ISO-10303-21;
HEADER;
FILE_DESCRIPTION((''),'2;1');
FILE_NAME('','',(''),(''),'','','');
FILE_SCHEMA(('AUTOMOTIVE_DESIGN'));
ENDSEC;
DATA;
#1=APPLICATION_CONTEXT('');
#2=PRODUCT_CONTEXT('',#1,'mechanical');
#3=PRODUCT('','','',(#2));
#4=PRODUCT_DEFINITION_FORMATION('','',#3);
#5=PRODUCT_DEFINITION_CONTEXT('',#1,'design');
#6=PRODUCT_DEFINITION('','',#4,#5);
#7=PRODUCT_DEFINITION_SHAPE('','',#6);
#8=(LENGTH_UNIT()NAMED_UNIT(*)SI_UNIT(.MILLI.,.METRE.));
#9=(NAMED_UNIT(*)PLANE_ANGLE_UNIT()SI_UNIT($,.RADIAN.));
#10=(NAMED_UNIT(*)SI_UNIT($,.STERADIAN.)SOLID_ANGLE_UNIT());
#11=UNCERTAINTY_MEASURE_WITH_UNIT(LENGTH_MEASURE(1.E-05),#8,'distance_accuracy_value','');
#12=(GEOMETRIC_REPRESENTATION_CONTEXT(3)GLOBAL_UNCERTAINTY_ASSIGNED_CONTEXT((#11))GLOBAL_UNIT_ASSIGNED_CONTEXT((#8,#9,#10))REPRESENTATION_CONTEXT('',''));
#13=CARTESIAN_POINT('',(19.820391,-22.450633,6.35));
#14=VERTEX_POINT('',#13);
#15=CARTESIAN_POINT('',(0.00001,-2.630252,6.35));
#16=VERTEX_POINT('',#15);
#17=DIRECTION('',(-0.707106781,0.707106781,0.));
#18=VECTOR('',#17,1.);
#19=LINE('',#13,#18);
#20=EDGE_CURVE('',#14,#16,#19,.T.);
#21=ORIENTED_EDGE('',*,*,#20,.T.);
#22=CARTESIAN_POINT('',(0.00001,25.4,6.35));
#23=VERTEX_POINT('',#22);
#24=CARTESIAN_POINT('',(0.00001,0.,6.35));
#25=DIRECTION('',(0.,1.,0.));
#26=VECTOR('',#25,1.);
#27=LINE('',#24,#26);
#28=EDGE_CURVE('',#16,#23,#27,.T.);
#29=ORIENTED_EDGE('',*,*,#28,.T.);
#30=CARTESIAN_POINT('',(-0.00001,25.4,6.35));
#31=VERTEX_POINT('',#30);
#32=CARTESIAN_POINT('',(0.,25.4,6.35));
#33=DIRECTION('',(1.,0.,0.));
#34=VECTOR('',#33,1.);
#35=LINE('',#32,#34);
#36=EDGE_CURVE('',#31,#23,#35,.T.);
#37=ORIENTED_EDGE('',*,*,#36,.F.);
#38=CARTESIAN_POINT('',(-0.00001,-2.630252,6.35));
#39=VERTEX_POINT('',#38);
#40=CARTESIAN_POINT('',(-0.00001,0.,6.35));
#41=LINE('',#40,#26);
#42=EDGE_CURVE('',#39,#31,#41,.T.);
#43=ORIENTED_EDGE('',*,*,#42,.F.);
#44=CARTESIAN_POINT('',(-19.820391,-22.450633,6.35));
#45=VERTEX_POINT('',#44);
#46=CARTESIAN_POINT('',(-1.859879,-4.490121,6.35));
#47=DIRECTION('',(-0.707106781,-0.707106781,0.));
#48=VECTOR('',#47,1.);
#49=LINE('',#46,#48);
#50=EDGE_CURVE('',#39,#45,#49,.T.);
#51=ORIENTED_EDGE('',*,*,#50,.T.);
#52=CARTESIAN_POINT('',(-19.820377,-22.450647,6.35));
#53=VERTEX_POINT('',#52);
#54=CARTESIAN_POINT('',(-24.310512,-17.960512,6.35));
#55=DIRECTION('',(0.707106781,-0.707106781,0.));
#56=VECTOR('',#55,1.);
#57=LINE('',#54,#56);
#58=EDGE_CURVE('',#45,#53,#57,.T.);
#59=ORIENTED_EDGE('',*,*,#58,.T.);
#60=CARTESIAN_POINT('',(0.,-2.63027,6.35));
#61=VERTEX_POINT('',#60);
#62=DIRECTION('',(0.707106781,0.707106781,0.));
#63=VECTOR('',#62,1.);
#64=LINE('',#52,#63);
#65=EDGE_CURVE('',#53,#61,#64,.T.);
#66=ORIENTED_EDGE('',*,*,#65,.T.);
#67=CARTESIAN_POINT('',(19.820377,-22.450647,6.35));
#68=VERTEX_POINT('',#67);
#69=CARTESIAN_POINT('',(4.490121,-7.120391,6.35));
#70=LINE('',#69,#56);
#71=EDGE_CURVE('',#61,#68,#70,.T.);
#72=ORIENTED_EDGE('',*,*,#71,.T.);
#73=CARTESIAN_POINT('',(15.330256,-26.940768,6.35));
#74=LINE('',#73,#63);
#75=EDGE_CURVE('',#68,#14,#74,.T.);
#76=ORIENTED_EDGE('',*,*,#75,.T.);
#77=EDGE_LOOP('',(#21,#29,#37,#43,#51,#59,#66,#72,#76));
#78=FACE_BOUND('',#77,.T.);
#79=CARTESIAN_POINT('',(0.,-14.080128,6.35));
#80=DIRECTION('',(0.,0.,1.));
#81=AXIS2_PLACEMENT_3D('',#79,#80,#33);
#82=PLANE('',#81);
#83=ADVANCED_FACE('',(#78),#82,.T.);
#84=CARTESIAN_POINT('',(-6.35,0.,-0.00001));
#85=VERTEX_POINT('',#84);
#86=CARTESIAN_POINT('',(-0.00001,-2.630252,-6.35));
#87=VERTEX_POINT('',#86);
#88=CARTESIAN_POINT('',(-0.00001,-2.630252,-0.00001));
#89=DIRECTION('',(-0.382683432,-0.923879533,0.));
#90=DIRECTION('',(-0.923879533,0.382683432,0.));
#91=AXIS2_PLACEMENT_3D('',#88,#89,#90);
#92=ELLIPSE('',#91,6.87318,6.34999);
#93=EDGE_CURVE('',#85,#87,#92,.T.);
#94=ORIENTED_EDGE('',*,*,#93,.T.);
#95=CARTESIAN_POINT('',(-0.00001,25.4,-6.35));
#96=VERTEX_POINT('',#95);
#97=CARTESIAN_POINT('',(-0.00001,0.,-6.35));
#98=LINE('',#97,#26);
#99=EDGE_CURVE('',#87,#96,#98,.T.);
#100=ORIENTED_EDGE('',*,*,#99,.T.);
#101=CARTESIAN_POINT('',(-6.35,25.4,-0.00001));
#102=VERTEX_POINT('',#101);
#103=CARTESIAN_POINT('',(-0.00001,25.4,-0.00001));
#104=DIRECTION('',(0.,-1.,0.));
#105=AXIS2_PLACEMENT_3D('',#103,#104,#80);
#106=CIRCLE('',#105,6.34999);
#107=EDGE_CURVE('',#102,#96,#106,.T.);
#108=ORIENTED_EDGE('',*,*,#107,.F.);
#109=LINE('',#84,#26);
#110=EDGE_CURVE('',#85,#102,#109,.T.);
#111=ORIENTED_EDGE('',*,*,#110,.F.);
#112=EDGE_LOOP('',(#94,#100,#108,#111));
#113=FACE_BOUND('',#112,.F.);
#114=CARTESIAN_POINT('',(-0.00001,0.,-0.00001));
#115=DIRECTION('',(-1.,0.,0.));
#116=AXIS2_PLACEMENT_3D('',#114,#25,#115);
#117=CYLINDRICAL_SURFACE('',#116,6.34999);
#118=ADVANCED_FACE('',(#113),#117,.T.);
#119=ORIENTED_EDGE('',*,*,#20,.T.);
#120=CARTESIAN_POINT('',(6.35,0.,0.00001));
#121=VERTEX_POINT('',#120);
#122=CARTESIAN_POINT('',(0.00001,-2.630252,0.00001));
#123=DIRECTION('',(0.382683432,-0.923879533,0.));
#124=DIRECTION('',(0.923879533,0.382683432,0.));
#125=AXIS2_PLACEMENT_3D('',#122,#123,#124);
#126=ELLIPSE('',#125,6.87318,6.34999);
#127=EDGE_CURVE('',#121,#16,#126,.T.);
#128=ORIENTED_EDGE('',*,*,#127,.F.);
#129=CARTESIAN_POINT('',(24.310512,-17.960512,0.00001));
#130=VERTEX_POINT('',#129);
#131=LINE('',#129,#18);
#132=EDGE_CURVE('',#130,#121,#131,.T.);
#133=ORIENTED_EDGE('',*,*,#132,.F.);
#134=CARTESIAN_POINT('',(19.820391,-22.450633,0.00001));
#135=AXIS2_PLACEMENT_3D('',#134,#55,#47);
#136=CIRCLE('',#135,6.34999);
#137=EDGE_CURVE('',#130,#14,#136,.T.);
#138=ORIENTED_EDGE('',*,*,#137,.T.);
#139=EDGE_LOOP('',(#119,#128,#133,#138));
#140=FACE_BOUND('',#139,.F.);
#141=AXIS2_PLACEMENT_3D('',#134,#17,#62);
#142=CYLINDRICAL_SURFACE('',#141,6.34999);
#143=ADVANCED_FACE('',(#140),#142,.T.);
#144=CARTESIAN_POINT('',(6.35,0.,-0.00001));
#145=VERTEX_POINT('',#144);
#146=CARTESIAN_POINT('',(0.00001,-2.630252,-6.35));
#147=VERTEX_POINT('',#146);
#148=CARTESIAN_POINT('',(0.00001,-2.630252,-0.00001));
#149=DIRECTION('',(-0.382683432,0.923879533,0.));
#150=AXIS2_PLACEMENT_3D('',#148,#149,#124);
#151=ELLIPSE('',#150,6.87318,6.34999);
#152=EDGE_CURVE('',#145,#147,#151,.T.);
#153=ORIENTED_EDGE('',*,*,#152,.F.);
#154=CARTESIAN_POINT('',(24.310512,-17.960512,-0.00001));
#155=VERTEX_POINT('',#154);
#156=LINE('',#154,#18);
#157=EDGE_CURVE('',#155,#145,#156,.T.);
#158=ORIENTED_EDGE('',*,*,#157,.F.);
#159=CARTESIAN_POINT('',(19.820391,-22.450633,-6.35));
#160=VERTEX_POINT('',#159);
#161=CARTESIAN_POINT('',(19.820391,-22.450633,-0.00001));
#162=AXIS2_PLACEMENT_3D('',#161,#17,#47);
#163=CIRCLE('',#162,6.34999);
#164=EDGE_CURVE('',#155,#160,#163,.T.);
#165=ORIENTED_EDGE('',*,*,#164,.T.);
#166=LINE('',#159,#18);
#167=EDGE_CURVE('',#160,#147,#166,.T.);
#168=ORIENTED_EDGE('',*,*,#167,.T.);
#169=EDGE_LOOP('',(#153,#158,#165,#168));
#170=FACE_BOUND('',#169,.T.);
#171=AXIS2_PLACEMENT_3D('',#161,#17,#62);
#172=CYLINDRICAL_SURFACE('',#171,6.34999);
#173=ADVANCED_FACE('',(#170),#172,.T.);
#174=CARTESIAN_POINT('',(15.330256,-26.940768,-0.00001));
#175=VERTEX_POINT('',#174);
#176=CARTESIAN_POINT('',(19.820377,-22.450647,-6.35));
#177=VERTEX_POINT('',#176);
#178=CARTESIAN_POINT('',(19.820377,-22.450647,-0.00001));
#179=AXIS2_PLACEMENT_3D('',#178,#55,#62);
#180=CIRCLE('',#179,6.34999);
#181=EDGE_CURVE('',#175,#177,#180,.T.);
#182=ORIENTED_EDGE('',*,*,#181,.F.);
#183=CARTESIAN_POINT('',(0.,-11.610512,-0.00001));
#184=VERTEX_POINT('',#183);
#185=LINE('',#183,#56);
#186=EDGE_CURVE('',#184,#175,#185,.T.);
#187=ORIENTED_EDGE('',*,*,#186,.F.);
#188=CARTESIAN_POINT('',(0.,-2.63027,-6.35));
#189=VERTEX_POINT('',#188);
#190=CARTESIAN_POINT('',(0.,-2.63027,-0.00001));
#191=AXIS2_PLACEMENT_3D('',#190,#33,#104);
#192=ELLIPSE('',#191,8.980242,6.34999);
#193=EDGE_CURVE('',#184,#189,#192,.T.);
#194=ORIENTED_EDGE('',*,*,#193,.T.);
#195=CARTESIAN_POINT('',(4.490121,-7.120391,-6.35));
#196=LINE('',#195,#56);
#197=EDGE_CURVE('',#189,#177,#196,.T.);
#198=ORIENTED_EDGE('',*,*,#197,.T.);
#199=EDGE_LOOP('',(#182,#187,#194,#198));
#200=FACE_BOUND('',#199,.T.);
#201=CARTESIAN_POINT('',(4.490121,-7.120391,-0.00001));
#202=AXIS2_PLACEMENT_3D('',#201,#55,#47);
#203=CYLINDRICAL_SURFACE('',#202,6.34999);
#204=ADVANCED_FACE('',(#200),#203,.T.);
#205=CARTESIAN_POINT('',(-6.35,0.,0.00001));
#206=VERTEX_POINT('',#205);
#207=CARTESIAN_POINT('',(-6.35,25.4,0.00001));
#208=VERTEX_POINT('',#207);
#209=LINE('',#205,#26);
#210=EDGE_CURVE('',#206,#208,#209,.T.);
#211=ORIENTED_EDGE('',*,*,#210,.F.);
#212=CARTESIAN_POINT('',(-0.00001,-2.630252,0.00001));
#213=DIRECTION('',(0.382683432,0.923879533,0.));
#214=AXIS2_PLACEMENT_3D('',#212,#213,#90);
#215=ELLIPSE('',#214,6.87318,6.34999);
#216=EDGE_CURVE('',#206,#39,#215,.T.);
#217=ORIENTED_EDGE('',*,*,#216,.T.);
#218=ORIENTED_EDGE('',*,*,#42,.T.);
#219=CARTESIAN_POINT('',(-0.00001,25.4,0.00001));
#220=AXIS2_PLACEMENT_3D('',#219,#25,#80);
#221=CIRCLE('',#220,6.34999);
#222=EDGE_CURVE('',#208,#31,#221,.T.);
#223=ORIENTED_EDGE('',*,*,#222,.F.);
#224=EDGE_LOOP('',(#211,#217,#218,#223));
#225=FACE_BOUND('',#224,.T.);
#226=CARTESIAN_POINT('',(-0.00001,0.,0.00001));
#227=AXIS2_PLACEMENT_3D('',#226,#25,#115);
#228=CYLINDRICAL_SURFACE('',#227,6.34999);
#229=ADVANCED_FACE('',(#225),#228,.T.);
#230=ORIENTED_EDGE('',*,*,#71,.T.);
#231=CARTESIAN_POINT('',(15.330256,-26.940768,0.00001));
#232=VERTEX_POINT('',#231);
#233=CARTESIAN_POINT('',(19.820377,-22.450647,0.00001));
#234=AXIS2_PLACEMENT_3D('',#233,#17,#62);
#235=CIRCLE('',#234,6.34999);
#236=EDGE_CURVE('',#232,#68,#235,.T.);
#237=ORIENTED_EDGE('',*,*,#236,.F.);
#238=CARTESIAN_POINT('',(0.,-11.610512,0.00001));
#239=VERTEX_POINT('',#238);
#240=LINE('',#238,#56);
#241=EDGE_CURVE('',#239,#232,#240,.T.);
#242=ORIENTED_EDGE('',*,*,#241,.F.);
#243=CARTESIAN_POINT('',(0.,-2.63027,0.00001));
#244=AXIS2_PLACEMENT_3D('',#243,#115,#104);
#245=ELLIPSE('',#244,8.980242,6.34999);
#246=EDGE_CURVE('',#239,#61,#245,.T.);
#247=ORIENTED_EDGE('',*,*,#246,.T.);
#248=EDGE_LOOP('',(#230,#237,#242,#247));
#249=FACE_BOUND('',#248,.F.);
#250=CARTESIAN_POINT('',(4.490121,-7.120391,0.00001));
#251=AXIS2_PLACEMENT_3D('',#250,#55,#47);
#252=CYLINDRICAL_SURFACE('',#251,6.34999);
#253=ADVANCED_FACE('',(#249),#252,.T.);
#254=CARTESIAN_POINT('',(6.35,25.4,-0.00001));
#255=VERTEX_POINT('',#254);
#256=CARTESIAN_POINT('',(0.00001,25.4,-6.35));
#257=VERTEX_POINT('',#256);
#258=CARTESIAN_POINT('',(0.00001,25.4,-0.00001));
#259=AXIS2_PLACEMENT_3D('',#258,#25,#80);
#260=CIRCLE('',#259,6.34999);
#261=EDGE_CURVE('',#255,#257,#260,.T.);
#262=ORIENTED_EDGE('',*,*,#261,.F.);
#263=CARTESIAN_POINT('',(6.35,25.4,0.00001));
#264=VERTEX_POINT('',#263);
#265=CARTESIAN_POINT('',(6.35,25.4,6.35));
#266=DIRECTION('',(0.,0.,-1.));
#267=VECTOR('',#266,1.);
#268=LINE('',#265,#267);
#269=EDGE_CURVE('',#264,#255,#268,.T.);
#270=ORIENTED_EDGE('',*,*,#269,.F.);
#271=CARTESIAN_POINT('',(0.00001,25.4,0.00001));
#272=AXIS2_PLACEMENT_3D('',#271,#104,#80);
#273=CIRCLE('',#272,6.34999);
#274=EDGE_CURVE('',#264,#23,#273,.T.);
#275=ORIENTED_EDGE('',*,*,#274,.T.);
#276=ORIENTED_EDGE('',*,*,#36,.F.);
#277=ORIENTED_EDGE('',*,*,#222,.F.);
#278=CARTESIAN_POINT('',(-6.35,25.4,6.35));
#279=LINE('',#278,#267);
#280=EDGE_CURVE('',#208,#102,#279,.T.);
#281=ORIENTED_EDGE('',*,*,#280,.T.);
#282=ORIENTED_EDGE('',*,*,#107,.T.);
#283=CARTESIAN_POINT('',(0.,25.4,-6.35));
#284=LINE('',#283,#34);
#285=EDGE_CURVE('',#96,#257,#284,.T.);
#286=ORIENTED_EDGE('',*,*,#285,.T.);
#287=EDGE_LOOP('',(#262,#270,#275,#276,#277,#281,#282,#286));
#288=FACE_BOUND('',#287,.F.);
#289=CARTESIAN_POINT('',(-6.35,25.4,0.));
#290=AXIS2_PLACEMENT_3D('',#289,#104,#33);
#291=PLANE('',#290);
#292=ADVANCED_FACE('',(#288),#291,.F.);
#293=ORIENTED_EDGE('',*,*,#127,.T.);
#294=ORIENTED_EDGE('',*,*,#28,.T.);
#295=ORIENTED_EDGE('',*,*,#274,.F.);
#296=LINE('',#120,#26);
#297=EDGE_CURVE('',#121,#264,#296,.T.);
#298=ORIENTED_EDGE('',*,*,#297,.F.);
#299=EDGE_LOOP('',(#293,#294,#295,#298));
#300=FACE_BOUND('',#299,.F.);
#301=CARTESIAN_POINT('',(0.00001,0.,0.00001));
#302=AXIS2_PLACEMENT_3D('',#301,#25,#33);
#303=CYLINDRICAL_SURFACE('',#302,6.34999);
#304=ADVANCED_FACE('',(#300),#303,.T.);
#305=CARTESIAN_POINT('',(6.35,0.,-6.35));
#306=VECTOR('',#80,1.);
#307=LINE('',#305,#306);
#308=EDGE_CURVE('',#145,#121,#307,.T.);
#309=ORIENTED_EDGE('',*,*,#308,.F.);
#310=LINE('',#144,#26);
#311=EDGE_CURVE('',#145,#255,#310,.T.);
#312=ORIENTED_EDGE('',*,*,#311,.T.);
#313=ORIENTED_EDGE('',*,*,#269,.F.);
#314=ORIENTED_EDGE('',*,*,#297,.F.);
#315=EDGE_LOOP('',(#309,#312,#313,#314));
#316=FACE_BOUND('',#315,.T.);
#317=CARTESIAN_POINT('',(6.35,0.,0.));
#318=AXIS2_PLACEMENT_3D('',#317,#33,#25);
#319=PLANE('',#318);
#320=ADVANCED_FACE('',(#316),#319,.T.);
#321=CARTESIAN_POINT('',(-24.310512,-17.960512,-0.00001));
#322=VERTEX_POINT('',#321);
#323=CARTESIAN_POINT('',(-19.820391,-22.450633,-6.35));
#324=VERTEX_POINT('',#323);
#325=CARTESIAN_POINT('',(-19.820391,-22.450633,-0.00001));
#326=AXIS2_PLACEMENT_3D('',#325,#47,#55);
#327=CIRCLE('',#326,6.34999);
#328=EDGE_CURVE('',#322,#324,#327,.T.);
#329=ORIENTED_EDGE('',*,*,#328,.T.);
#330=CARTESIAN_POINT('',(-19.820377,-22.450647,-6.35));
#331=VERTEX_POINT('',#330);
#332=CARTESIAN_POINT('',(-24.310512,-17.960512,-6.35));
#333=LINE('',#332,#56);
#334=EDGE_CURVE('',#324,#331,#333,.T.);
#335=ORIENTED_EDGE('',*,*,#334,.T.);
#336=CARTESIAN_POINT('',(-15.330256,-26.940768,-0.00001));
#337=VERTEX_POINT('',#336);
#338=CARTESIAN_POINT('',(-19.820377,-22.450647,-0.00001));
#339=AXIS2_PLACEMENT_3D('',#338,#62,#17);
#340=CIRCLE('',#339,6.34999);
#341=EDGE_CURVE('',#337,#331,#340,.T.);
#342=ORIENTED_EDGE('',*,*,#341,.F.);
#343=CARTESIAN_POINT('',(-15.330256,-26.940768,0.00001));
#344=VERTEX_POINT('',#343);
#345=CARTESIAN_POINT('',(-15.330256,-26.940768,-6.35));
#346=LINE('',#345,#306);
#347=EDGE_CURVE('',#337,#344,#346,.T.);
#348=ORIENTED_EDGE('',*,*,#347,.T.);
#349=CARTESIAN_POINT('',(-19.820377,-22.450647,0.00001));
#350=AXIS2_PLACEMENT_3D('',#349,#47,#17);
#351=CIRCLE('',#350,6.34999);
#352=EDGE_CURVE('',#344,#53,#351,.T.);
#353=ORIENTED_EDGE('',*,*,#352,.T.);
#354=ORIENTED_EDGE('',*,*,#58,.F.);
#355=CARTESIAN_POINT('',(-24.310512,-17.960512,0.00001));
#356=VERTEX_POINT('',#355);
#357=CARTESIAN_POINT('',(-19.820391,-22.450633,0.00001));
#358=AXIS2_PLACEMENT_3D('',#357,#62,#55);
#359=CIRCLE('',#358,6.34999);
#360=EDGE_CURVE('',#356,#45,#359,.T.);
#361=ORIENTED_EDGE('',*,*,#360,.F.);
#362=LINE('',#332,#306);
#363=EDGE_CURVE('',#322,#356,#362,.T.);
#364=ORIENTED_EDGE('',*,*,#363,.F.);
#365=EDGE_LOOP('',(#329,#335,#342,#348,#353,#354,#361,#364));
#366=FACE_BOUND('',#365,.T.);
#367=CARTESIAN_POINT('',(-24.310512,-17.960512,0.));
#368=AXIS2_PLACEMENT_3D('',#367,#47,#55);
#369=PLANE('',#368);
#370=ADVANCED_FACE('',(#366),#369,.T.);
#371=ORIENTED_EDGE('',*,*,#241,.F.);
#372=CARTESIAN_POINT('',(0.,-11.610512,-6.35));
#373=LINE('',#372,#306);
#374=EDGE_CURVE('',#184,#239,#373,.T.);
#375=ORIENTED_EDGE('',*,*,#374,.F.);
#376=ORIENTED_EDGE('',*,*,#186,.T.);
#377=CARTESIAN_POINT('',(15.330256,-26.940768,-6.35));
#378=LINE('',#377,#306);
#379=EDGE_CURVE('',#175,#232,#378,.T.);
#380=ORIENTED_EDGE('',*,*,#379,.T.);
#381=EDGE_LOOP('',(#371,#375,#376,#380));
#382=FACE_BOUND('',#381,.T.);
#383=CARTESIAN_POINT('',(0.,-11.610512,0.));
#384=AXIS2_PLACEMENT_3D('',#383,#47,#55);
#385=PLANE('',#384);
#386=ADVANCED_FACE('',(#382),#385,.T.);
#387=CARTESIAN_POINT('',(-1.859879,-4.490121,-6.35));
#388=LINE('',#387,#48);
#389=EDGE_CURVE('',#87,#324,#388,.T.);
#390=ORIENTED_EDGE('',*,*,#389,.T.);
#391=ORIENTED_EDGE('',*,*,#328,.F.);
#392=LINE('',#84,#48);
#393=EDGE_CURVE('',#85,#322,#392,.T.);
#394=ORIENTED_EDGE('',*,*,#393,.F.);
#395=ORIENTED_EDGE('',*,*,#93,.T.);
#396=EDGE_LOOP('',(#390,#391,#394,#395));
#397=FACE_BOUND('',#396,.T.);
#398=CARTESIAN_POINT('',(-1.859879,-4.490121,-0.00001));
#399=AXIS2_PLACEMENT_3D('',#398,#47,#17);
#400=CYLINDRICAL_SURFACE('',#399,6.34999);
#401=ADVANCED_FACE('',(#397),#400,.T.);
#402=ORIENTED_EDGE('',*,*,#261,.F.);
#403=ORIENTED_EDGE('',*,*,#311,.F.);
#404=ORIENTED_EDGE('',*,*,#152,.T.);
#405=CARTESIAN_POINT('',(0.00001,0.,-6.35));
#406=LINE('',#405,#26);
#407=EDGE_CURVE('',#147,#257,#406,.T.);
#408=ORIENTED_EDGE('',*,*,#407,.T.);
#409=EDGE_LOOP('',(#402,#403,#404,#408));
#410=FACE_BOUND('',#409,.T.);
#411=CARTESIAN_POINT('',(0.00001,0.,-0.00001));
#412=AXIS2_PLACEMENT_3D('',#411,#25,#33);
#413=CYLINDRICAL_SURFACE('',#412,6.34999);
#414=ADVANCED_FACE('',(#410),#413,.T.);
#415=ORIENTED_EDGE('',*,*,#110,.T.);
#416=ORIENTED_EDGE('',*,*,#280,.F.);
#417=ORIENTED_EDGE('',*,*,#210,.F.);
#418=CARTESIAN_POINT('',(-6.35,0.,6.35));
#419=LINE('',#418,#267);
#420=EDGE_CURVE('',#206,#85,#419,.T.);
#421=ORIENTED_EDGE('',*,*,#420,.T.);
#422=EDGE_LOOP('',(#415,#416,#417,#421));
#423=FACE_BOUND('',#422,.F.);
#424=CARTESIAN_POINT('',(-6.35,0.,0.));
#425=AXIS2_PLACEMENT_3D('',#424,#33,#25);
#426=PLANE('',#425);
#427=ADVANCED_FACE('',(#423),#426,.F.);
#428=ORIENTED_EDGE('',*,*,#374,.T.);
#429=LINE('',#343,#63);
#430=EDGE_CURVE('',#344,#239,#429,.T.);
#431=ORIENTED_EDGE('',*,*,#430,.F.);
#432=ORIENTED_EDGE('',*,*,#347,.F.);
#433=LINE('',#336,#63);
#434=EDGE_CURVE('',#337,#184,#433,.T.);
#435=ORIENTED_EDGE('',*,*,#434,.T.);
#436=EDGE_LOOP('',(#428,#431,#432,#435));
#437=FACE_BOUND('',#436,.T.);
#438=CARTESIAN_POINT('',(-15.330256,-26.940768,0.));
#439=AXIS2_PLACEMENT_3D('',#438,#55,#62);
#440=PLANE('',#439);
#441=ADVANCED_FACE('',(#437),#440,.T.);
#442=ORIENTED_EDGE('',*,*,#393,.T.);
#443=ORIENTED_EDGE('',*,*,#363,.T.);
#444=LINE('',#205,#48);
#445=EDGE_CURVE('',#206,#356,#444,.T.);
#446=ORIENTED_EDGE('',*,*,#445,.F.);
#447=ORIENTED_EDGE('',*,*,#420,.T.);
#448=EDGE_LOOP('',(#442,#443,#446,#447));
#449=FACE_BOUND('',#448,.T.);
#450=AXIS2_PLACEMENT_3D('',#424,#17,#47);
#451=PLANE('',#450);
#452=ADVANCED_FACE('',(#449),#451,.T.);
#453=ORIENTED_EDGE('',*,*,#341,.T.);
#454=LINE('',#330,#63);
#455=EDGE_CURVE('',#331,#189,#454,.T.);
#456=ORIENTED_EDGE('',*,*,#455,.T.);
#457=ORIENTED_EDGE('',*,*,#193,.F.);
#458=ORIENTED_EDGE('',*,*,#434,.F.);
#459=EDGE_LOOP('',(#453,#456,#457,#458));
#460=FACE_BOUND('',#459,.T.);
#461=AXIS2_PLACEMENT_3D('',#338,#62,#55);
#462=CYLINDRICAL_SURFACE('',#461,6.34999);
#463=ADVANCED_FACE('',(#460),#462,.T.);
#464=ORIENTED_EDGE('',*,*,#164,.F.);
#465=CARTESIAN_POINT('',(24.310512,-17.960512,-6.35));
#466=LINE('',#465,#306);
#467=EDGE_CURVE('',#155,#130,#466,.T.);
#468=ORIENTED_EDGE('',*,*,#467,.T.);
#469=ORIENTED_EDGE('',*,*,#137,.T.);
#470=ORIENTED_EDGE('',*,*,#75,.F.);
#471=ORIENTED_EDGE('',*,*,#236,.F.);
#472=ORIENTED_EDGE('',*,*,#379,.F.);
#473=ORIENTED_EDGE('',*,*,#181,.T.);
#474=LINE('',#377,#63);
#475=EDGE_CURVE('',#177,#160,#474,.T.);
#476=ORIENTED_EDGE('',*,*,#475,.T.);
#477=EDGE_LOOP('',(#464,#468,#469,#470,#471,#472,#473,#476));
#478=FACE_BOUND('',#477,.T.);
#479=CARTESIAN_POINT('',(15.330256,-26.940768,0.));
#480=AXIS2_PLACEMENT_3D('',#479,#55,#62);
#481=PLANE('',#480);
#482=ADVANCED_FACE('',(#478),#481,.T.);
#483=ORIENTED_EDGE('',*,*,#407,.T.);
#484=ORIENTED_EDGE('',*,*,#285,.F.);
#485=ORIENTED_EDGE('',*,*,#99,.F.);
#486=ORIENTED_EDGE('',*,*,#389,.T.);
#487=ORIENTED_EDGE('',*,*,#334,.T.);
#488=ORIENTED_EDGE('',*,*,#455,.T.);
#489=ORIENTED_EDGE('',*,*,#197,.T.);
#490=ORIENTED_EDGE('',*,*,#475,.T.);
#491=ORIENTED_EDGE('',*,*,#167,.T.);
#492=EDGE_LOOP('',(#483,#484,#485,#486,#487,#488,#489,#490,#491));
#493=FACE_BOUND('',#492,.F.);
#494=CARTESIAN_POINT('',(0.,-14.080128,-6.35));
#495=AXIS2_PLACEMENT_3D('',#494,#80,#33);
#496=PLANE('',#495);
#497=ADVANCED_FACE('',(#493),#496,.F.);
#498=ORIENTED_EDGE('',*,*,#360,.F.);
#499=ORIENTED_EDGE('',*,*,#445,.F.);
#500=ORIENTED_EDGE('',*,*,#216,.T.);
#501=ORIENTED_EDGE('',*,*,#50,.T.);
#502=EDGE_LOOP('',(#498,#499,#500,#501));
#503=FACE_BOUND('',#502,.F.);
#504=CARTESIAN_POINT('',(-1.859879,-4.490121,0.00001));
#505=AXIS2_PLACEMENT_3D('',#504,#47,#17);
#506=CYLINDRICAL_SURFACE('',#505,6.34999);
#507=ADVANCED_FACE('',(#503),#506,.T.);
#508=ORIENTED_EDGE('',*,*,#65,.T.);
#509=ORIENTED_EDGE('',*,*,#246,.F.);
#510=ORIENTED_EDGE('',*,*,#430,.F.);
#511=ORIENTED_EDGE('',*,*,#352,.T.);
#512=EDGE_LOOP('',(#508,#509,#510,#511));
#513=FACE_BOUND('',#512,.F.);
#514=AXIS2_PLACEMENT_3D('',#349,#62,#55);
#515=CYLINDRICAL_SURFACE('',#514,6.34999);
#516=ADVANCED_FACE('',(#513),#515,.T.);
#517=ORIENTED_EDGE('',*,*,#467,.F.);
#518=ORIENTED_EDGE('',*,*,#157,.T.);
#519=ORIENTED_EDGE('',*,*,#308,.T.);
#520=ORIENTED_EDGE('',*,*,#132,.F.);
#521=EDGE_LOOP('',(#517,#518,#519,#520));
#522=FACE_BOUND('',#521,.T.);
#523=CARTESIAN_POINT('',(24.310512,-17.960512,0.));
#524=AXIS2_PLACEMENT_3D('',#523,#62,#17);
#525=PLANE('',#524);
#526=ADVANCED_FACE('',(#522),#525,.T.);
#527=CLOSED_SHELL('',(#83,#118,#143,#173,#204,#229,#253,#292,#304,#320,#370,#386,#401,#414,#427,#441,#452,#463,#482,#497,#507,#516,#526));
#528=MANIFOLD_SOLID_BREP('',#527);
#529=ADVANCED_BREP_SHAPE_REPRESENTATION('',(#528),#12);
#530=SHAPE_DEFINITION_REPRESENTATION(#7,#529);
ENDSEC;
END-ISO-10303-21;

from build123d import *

# Parameters (mm, degrees)
F0_W     = 12.7
F0_H     = 25.4
F1_DEPTH = 6.35
F2_R     = 6.34999


# Not quite as in the source:
# - a fillet or chamfer is up to 0.001 mm smaller than in the source, because OpenCascade refuses the exact size


with BuildPart() as f1:
    # F0 (on Top) → F1 (new body, symmetric)
    with BuildSketch(Plane.XY):
        Polygon((6.35, 0), (-6.35, 0), (-24.3105122421, -17.9605122421), (-15.3302561211, -26.9407683632), (0, -11.6105122421), (15.3302561211, -26.9407683632), (24.3105122421, -17.9605122421), align=None)
        with Locations((0, 12.7)):
            Rectangle(F0_W, F0_H)
    extrude(amount=F1_DEPTH, both=True)

    # F2 (radius 6.35 in the source; OpenCascade refuses exactly that, so slightly less here)
    f2_edges = [f1.edges().sort_by_distance(p)[0] for p in [
        (6.35, 12.7, 6.35),
        (6.35, 12.7, -6.35),
        (-6.35, 12.7, 6.35),
        (-6.35, 12.7, -6.35),
        (15.330256, -8.980256, 6.35),
        (15.330256, -8.980256, -6.35),
        (7.665128, -19.27564, 6.35),
        (7.665128, -19.27564, -6.35),
        (-7.665128, -19.27564, 6.35),
        (-7.665128, -19.27564, -6.35),
        (-15.330256, -8.980256, 6.35),
        (-15.330256, -8.980256, -6.35),
    ]]
    fillet(f2_edges, radius=F2_R)


solid = f1.part
